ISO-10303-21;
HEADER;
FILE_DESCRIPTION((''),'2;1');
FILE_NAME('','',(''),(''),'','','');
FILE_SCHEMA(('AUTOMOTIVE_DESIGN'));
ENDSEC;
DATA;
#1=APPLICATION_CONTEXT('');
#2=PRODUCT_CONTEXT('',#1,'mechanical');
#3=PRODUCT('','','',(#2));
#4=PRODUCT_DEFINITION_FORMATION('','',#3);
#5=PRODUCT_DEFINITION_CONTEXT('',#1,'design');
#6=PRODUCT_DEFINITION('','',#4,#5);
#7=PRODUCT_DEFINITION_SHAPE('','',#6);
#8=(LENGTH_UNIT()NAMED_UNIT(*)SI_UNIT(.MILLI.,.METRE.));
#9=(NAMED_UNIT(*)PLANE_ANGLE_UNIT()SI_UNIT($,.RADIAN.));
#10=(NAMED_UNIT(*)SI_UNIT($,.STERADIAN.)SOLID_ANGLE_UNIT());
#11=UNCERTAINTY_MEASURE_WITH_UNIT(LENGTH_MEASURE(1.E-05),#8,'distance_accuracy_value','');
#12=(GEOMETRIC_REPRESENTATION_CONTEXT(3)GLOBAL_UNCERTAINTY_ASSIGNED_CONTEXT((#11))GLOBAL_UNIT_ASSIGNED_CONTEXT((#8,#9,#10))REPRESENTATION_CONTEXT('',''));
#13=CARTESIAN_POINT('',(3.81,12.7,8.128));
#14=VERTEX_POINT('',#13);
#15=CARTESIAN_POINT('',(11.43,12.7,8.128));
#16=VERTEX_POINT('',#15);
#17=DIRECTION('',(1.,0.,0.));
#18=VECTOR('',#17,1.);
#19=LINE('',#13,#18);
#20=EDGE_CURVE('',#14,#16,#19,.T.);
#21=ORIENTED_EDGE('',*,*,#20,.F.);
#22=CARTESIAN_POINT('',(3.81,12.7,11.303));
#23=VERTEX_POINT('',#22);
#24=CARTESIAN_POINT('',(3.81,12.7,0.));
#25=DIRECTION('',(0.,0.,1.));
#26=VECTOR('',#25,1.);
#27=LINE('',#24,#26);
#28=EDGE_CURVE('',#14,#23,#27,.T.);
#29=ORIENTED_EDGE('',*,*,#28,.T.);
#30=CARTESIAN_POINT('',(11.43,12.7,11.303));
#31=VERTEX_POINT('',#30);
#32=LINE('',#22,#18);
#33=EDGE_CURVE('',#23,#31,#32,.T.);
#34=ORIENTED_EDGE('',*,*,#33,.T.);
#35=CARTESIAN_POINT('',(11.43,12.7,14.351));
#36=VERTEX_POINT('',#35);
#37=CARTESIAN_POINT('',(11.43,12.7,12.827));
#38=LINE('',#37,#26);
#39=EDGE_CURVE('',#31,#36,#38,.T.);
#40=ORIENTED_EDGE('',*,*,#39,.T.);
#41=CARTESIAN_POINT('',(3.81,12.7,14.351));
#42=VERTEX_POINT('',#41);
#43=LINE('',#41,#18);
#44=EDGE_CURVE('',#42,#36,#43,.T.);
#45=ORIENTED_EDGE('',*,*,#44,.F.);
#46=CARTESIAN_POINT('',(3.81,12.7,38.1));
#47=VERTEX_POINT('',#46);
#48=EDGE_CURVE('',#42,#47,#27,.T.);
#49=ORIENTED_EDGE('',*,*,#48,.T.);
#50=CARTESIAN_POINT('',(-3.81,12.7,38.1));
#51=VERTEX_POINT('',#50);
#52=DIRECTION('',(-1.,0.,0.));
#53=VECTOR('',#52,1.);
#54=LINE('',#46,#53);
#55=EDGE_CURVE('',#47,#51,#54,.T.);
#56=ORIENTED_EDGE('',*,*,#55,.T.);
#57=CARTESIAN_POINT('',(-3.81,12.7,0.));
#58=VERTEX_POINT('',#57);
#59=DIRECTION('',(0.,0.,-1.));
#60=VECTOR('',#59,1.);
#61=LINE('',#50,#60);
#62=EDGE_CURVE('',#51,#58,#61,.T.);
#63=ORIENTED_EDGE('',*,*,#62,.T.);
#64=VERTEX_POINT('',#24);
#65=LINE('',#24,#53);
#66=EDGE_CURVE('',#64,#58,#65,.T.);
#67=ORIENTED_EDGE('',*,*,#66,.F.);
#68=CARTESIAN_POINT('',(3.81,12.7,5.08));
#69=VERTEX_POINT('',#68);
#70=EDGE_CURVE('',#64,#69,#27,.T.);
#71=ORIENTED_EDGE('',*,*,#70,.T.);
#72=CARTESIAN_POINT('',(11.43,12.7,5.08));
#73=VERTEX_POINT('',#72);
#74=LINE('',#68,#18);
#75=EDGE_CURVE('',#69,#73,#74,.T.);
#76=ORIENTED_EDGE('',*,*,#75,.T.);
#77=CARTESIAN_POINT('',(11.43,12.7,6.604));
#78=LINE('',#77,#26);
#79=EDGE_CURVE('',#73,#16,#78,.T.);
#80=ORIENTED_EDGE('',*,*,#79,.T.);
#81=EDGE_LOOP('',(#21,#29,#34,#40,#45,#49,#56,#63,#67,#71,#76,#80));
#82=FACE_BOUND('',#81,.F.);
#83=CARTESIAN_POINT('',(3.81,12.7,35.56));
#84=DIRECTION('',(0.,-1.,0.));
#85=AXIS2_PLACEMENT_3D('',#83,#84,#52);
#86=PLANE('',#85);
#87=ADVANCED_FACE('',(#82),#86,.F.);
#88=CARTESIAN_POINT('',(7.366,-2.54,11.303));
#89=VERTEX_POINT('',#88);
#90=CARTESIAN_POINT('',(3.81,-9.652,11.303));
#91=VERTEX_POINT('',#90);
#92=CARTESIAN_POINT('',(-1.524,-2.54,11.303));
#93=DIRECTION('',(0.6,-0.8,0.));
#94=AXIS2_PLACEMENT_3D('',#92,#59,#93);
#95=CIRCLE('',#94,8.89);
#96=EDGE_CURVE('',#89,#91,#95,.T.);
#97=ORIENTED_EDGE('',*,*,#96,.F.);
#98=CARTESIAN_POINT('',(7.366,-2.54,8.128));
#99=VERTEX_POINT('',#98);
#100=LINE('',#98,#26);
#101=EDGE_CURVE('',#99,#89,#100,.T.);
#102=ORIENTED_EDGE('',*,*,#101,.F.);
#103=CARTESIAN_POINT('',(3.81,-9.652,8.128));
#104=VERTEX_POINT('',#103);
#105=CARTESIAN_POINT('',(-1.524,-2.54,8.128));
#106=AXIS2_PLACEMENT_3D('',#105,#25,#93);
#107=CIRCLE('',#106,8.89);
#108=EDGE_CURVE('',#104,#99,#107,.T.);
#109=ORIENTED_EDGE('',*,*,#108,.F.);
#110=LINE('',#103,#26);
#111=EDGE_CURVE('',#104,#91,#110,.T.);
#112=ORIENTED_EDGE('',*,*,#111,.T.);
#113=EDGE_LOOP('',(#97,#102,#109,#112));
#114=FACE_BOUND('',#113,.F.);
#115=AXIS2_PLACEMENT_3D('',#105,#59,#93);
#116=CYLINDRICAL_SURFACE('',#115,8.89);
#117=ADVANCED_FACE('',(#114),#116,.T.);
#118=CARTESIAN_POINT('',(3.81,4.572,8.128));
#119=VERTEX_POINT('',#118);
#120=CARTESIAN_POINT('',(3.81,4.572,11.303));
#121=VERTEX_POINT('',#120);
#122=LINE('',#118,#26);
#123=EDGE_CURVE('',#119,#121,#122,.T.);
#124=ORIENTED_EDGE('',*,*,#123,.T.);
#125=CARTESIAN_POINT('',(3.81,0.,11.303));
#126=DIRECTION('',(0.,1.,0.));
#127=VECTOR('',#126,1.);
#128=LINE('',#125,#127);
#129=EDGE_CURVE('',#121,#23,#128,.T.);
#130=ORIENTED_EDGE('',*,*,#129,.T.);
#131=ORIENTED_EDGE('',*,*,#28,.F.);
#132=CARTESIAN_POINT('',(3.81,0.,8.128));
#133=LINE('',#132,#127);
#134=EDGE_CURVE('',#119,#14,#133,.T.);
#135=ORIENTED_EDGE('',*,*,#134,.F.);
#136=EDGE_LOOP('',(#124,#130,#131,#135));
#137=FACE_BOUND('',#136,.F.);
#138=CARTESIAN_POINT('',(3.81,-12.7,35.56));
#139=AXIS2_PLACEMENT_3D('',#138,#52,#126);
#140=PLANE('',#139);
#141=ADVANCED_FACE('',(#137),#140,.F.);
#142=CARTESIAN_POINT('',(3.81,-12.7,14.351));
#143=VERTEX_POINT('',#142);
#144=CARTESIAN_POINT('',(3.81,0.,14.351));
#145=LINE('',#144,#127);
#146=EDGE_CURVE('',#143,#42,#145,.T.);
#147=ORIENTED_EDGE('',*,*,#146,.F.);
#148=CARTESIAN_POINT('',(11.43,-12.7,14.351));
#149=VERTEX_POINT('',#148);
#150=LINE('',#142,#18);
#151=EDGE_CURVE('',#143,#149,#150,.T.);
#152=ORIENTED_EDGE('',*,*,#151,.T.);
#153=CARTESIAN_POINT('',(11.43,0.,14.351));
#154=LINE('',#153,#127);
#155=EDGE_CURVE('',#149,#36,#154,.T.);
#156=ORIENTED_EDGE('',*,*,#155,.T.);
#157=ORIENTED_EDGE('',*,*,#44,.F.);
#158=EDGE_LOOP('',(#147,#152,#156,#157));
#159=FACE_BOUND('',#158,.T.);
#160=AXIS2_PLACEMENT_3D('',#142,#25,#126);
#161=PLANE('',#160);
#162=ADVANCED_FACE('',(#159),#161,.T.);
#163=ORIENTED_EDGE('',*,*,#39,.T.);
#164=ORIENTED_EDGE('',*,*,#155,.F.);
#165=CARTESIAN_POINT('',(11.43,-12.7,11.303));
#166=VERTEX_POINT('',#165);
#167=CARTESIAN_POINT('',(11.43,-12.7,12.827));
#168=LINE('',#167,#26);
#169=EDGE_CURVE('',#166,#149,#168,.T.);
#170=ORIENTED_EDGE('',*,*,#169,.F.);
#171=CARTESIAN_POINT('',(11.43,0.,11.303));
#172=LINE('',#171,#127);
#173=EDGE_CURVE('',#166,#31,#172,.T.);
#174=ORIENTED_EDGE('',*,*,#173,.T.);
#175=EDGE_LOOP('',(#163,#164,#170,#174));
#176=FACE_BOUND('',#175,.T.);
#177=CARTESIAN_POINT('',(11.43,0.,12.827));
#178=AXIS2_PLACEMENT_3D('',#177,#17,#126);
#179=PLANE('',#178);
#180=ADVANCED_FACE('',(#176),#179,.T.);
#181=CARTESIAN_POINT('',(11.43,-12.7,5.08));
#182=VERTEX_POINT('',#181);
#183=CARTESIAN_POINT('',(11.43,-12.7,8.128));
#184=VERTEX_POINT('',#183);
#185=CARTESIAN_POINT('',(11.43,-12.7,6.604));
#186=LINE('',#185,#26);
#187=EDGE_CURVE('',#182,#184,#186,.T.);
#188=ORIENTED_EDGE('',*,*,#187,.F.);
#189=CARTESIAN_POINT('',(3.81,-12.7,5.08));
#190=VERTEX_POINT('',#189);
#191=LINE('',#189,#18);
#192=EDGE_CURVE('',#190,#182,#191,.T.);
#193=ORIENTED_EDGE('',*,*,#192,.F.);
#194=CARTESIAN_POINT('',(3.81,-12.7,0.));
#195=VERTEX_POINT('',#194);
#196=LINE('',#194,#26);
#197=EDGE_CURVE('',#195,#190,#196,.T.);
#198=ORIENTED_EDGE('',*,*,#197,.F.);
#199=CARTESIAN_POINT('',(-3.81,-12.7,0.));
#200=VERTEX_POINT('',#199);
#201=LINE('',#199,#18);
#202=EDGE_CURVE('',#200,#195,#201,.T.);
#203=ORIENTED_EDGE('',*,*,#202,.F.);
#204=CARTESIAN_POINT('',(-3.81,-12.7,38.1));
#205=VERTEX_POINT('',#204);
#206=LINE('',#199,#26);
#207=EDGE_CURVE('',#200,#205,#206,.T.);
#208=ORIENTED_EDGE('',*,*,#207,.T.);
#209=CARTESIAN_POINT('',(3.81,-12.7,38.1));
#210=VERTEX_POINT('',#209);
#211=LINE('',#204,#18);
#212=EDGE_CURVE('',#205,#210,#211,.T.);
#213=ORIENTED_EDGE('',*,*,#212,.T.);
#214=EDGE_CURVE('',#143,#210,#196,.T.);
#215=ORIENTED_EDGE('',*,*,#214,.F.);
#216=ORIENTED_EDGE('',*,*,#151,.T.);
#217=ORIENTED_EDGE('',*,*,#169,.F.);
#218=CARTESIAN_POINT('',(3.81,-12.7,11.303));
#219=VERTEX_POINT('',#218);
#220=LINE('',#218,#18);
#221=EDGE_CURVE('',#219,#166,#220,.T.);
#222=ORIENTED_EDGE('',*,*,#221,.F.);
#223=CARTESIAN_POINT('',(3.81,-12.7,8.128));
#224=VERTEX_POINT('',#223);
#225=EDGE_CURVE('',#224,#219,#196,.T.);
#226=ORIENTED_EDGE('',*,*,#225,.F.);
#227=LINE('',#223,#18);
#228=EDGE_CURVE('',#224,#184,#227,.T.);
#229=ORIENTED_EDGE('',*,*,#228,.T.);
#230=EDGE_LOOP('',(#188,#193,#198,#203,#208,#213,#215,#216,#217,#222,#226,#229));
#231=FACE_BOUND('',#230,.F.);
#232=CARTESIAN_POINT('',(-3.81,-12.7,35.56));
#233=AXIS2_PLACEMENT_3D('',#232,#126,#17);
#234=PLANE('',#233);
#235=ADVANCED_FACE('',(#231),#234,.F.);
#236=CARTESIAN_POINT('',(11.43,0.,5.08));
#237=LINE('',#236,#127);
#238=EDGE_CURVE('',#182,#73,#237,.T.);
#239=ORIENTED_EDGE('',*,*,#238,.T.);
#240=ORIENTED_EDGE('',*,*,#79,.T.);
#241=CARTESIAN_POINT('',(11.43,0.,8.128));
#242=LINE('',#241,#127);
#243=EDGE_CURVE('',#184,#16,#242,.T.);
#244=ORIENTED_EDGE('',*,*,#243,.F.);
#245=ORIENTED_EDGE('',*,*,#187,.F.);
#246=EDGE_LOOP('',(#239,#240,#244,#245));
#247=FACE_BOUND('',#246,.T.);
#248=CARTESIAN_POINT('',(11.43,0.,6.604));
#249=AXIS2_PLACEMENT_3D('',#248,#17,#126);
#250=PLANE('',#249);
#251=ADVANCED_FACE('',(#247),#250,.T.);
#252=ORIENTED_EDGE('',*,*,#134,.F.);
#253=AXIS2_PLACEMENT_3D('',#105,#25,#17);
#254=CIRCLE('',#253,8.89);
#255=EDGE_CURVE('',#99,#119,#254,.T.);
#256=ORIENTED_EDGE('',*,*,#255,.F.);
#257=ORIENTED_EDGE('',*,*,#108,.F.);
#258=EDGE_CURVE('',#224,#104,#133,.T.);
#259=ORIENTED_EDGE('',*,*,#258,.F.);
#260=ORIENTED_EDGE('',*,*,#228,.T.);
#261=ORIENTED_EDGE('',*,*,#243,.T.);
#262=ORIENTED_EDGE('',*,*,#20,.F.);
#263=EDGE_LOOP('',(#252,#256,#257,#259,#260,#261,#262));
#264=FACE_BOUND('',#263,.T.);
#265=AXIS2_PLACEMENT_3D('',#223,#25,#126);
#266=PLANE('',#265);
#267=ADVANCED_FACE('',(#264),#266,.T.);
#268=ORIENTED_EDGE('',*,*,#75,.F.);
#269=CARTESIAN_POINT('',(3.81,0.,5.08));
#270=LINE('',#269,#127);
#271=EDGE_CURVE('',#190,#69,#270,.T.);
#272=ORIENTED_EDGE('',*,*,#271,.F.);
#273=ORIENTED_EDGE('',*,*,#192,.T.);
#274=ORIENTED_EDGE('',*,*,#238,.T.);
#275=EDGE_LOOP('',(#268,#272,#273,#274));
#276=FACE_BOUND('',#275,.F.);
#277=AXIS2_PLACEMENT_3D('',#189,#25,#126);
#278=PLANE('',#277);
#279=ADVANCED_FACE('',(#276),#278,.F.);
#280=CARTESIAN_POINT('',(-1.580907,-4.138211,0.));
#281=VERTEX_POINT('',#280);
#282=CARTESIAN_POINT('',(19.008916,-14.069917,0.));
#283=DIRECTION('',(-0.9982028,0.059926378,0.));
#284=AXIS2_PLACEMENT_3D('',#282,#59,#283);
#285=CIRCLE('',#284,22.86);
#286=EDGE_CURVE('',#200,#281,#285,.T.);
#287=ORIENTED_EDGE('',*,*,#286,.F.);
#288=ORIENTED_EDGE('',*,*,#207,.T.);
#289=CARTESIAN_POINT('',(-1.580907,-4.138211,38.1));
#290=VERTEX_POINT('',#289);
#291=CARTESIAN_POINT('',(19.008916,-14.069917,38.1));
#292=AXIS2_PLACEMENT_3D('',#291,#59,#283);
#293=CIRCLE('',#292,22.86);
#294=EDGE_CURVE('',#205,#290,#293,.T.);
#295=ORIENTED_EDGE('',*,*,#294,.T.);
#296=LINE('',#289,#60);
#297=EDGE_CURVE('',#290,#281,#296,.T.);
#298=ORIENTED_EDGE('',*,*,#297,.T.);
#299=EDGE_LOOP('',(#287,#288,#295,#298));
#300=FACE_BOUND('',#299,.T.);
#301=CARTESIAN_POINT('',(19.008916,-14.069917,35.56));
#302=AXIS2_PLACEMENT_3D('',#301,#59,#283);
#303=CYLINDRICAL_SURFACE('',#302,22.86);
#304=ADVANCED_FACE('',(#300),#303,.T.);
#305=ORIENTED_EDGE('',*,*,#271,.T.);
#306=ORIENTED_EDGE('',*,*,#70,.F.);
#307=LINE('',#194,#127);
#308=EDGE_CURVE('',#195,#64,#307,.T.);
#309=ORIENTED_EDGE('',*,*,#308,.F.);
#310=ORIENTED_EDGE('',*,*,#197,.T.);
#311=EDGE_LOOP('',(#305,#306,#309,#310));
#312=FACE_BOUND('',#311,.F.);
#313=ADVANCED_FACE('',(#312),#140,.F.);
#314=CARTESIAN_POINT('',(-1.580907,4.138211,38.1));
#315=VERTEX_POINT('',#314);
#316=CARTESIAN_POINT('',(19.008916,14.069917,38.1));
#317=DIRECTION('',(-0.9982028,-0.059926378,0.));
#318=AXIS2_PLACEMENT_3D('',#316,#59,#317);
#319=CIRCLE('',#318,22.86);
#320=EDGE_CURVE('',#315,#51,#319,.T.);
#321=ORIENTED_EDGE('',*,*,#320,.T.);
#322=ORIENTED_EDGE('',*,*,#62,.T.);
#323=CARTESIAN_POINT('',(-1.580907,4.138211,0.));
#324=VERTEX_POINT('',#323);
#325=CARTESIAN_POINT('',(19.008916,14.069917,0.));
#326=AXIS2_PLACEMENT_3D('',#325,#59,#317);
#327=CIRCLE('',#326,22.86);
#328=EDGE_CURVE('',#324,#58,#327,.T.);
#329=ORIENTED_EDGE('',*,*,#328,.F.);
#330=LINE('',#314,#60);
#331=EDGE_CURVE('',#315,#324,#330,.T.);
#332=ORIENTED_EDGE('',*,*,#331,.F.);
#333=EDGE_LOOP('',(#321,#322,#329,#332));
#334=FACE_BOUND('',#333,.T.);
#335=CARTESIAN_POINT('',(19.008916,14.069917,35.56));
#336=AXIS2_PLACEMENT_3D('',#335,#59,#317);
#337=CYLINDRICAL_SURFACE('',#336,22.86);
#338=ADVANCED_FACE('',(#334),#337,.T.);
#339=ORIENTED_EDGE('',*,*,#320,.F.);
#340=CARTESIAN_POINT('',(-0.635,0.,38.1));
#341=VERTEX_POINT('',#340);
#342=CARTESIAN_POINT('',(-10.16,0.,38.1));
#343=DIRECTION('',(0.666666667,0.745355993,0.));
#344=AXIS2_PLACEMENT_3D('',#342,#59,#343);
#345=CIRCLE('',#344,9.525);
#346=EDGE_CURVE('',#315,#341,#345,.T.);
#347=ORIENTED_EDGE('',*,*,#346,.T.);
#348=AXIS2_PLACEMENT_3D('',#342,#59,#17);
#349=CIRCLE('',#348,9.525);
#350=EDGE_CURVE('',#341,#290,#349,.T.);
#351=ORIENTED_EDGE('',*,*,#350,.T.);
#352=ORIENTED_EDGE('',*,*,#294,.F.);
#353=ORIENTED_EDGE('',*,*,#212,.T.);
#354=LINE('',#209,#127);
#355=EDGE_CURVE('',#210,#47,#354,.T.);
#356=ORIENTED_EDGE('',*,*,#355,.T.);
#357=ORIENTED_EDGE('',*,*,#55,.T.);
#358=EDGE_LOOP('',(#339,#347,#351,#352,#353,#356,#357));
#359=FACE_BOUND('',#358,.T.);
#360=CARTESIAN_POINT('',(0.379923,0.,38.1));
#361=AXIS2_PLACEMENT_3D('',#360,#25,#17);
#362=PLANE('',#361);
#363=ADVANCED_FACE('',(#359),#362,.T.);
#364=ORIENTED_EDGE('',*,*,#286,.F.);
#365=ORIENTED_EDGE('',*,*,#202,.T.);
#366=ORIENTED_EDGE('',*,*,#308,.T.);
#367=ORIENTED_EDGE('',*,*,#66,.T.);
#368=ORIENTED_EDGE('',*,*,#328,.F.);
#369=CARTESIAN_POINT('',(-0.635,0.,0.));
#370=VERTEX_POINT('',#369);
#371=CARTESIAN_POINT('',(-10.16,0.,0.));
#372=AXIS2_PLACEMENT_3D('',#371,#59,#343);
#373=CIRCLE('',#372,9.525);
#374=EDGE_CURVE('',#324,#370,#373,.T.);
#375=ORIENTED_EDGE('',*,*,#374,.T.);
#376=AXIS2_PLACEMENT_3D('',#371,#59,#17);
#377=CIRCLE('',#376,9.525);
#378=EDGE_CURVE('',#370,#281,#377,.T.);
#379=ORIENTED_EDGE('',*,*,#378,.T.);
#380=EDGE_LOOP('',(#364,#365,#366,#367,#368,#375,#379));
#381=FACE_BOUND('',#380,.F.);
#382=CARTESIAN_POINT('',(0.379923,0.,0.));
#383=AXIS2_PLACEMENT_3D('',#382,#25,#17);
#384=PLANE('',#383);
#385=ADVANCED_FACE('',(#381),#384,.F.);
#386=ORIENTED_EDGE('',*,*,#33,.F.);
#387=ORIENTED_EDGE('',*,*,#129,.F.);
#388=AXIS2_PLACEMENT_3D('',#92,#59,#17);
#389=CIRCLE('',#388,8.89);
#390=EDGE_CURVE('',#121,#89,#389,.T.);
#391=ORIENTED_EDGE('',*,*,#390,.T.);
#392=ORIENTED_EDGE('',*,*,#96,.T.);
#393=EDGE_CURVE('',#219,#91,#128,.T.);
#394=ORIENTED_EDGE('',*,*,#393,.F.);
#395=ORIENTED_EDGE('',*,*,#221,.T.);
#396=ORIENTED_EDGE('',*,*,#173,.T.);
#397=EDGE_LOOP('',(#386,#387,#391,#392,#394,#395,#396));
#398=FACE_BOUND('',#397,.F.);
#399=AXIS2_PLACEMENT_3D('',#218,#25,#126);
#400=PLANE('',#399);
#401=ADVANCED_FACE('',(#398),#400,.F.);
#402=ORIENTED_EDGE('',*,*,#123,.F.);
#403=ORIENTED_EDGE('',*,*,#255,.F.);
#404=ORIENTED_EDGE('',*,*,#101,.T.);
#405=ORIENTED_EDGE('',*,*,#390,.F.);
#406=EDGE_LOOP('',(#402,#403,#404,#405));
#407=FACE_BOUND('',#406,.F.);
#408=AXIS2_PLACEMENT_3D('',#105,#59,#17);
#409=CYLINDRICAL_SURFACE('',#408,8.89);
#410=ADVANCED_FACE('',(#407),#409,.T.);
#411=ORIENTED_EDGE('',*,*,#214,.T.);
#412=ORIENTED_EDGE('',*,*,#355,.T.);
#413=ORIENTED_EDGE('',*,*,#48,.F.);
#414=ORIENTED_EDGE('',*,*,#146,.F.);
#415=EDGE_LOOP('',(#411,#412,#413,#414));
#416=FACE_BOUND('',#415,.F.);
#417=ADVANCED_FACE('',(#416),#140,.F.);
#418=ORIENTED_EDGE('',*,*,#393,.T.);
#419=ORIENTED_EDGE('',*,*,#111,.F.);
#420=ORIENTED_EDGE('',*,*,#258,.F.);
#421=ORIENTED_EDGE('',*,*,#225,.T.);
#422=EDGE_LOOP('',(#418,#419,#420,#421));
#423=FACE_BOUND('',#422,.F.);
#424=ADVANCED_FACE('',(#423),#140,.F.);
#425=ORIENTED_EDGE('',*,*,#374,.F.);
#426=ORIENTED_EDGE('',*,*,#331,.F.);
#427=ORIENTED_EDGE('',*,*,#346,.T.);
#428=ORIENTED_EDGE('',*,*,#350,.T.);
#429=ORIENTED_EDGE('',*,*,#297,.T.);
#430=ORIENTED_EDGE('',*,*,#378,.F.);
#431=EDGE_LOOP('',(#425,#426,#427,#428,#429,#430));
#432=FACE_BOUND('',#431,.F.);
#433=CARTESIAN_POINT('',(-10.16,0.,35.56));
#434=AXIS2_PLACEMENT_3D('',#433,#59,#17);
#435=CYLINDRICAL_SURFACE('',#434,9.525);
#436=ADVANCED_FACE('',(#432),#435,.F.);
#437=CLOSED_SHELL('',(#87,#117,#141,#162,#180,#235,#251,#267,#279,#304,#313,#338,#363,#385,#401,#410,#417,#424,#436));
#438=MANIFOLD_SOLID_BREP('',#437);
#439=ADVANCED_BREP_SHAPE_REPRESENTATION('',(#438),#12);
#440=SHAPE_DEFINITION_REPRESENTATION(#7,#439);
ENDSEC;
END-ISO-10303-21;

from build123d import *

# Parameters (mm, degrees)
F1_DEPTH    = 25.4
F2_T1_DEPTH = 53.4024208572
F3_DEPTH    = 10.16
F4_DEPTH    = 2.54
F5_W        = 25.4
F5_H        = 3.048
F6_DEPTH    = 7.62
F8_DEPTH    = 5.08


# Not quite as in the source:
# - a fillet or chamfer that OpenCascade refuses, or shapes differently, is made with other operations: its cross-section is extruded or revolved along the edge and cut away or added


with BuildPart() as f1:
    # F0 (on Top) → F1 (new body)
    with BuildSketch(Plane.XY):
        with BuildLine():
            Line((-3.81, -12.7), (3.81, -12.7))
            Line((3.81, -12.7), (3.81, 12.7))
            Line((3.81, 12.7), (-3.81, 12.7))
            Line((-3.81, 12.7), (-3.81, 7.0995158286))
            ThreePointArc((-3.81, 7.0995158286), (-1.4649043996, 3.8885649667), (-0.635, 0))
            ThreePointArc((-0.635, 0), (-1.4649043996, -3.8885649667), (-3.81, -7.0995158286))
            Line((-3.81, -7.0995158286), (-3.81, -12.7))
        make_face()
    extrude(amount=F1_DEPTH)

    # F2: fillet of radius 22.86 on 2 edges, made by hand

    # F2_s2 → F2_t1 (cut)
    with BuildSketch(Plane.XY.offset(-14.0012104286)):
        with BuildLine():
            ThreePointArc((-3.81, 12.7), (-3.1136000163, 8.3102394823), (-1.5809070588, 4.1382108824))
            ThreePointArc((-1.5809070588, 4.1382108824), (-2.5500206467, 5.7283365162), (-3.81, 7.0995158286))
            Line((-3.81, 7.0995158286), (-3.81, 12.7))
        make_face()
        with BuildLine():
            ThreePointArc((-3.81, -12.7), (-3.1136000163, -8.3102394823), (-1.5809070588, -4.1382108824))
            ThreePointArc((-1.5809070588, -4.1382108824), (-2.5500206467, -5.7283365162), (-3.81, -7.0995158286))
            Line((-3.81, -7.0995158286), (-3.81, -12.7))
        make_face()
    extrude(amount=F2_T1_DEPTH, mode=Mode.SUBTRACT)

    # F3 (add): a face of the model
    f3_faces = [f1.faces().sort_by_distance(p)[0] for p in [
        (0.6414875327, 0, 25.4),
    ]]
    extrude(f3_faces, amount=F3_DEPTH)

    # F4 (add): a face of the model
    f4_faces = [f1.faces().sort_by_distance(p)[0] for p in [
        (0.6414875327, 0, 35.56),
    ]]
    extrude(f4_faces, amount=F4_DEPTH)

    # F5 (on face) → F6 (join)
    with BuildSketch(Plane.YZ.offset(3.81)):
        with Locations((0, 12.827)):
            Rectangle(F5_W, F5_H)
        with Locations((0, 6.604)):
            Rectangle(F5_W, F5_H)
    extrude(amount=F6_DEPTH)

    # F7 (on face) → F8 (join)
    with BuildSketch(Plane.XY.offset(8.128)):
        with BuildLine():
            ThreePointArc((3.81, -9.652), (6.427457728, -6.515728864), (7.366, -2.54))
            ThreePointArc((7.366, -2.54), (6.427457728, 1.435728864), (3.81, 4.572))
            Line((3.81, 4.572), (3.81, -9.652))
        make_face()
    extrude(amount=F8_DEPTH)


solid = f1.part
